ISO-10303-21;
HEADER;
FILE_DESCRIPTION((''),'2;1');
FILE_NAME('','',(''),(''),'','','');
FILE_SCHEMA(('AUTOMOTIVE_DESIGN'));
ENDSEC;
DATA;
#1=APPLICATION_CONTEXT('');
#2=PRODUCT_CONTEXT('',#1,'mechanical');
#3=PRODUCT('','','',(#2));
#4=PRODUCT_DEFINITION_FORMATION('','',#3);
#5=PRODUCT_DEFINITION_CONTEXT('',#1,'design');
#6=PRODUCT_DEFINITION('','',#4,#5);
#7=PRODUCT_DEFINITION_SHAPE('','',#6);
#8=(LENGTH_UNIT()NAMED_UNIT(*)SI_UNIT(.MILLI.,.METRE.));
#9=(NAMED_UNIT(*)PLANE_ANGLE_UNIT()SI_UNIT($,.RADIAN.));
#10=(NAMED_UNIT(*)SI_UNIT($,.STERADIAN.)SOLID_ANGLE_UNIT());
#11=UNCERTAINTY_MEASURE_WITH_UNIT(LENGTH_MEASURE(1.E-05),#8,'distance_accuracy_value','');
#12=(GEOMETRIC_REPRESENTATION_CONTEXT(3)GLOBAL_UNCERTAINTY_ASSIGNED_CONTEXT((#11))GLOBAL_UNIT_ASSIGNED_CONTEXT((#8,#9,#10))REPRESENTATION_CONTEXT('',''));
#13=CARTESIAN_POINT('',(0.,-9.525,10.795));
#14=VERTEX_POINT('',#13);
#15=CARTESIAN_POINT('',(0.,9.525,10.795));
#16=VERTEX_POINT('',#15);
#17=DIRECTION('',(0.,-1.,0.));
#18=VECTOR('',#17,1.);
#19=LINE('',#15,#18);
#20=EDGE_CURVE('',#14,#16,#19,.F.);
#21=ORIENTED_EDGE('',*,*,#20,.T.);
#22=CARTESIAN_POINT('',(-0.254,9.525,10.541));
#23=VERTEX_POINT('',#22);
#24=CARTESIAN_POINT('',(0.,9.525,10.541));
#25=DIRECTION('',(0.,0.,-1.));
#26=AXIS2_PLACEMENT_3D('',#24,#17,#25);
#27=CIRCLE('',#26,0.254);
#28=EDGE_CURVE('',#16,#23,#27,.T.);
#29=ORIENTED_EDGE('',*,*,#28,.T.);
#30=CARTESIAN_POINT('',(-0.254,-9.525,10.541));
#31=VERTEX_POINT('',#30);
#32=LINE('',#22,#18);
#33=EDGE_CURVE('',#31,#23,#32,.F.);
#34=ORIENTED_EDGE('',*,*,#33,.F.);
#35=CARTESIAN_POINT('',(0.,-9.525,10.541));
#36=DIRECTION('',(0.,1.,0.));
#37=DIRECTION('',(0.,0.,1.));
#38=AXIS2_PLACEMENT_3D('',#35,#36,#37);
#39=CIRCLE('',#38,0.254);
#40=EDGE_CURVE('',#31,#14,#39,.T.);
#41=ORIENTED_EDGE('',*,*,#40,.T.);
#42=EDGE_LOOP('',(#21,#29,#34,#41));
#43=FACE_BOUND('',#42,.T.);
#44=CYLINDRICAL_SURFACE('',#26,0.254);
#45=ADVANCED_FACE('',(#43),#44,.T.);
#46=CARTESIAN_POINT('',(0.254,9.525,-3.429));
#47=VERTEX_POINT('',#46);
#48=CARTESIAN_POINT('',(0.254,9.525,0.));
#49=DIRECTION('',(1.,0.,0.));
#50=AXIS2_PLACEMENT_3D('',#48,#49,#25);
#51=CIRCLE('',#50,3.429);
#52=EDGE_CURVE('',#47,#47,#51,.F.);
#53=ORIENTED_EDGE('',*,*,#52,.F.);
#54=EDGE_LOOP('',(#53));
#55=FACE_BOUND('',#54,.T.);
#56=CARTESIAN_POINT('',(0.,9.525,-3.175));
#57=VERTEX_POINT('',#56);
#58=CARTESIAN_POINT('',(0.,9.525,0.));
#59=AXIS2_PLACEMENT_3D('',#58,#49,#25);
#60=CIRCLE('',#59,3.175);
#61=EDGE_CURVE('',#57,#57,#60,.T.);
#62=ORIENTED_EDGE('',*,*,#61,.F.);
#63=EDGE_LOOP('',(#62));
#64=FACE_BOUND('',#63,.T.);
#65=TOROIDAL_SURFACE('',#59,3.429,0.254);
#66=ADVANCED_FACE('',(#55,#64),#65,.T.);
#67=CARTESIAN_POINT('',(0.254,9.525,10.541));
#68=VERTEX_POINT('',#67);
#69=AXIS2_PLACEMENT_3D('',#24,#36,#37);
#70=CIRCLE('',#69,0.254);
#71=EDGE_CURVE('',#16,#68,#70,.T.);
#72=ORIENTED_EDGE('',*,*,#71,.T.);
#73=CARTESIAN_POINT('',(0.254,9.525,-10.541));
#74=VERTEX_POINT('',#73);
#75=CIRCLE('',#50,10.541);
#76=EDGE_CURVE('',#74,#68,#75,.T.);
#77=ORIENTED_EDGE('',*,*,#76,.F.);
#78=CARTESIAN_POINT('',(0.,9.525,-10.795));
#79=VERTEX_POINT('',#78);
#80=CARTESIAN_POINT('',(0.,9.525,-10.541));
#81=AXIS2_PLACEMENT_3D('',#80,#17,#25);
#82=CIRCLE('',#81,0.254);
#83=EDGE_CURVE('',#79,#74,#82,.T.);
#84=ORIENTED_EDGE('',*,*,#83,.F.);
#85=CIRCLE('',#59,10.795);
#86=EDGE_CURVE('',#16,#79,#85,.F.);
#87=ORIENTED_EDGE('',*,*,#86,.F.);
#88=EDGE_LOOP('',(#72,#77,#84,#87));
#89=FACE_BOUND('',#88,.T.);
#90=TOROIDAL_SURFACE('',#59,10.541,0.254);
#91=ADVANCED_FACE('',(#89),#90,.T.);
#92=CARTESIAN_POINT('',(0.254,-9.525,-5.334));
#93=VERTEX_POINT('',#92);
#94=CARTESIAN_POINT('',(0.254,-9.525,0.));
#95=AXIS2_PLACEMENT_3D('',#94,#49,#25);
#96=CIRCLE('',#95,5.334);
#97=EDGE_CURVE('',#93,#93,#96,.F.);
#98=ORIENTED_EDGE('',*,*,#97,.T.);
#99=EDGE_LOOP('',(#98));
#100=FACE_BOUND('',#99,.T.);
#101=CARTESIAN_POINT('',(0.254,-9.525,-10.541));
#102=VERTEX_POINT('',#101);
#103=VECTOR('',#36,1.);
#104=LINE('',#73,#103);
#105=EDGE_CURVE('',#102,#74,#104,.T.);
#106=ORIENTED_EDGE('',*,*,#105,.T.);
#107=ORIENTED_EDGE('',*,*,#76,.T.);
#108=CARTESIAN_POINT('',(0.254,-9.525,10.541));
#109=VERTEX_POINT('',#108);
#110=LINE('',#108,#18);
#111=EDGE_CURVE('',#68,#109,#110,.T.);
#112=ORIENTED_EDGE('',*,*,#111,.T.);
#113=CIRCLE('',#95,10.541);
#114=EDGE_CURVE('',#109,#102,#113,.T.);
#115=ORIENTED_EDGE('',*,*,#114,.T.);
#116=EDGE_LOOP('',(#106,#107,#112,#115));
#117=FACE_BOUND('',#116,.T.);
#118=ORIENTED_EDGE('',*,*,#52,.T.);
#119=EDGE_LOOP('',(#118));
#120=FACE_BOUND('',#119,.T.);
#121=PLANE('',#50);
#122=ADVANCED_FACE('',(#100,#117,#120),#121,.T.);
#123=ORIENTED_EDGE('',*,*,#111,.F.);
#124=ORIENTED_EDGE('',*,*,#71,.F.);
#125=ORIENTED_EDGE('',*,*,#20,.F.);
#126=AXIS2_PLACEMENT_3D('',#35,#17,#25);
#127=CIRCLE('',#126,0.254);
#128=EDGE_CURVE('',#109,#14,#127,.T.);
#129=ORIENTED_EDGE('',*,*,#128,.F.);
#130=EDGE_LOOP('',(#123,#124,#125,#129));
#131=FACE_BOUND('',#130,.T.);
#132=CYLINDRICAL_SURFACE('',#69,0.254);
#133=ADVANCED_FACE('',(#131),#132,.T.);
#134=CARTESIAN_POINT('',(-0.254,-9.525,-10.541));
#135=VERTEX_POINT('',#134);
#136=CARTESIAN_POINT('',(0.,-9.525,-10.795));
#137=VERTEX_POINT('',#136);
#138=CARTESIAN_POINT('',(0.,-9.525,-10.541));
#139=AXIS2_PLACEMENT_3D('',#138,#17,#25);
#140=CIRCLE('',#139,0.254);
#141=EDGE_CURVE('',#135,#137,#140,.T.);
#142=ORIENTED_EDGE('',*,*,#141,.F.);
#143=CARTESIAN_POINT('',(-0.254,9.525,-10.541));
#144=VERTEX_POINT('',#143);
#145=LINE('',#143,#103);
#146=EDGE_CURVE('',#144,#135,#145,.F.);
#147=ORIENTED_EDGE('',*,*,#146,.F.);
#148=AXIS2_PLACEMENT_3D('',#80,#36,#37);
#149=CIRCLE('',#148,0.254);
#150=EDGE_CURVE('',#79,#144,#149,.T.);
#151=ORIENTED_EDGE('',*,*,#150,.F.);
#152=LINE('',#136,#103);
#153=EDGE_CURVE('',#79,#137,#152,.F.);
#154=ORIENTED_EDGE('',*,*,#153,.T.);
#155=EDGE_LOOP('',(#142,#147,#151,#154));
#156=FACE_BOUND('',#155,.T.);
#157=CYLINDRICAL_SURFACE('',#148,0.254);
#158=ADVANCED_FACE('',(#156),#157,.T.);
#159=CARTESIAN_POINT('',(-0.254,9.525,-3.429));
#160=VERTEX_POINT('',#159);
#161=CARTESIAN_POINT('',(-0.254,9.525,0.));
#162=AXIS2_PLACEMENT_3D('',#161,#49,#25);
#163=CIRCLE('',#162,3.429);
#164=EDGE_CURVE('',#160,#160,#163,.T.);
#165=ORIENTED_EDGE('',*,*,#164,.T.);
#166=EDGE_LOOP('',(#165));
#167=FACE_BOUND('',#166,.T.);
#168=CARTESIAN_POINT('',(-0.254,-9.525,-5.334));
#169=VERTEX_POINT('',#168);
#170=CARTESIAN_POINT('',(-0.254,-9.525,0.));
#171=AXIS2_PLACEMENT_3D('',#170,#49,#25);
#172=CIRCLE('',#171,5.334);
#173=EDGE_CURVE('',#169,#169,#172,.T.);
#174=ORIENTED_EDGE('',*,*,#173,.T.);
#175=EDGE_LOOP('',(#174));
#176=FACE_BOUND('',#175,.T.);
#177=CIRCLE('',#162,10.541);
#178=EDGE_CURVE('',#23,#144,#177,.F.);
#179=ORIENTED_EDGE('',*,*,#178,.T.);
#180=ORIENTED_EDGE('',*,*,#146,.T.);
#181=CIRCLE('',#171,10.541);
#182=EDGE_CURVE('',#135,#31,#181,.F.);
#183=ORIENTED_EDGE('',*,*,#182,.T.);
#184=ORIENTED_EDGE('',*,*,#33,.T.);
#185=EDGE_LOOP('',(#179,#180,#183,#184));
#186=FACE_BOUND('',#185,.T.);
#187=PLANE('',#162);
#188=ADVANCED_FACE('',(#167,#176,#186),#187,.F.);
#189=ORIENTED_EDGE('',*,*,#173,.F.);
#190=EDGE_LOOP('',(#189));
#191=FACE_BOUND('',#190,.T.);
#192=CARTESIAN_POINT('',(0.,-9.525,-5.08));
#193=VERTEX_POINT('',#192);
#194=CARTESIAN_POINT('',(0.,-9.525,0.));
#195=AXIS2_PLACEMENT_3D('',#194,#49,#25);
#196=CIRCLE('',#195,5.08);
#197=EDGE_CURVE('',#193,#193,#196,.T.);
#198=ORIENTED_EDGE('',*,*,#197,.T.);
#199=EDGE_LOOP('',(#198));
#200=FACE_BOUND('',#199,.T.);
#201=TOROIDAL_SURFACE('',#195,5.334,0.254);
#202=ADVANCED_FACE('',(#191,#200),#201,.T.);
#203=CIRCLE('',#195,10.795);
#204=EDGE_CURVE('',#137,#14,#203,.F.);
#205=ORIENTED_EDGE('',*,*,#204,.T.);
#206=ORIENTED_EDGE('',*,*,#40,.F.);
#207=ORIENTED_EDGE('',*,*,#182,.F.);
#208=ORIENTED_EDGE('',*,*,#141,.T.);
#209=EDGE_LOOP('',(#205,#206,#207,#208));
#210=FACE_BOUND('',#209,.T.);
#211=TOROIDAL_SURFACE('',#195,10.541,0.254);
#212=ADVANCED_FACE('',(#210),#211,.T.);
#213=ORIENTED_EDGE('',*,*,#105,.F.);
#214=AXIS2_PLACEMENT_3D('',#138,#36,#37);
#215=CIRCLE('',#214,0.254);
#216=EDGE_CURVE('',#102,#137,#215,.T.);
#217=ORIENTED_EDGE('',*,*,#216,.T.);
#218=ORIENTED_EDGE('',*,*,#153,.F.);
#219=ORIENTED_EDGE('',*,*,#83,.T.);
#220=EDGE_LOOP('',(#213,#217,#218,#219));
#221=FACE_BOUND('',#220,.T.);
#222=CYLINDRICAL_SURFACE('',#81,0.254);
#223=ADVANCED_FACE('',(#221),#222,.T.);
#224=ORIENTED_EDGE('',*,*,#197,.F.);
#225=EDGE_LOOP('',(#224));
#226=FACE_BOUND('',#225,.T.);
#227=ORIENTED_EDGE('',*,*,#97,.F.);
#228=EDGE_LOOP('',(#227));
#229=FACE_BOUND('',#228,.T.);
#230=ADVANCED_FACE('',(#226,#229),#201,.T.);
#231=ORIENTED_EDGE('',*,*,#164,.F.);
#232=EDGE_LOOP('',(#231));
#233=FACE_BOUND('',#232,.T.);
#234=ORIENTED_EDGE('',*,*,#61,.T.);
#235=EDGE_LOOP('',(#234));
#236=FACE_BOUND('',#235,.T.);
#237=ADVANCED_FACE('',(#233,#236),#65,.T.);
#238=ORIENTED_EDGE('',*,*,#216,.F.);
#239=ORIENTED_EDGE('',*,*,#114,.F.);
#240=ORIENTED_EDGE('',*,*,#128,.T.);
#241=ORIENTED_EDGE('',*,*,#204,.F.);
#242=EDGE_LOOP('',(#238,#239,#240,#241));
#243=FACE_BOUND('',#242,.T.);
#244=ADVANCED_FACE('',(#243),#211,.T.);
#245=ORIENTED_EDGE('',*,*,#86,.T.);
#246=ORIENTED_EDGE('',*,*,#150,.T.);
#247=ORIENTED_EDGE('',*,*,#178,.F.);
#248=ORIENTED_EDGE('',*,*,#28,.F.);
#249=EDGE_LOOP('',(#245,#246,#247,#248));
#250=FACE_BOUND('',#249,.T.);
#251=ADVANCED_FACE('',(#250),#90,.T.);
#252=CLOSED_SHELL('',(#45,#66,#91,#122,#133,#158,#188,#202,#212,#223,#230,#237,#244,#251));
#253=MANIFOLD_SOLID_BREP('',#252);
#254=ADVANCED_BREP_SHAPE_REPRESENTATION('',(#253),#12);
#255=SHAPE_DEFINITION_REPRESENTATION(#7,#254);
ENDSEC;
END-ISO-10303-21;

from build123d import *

# Parameters (mm, degrees)
SKETCH2_R           = 3.175
SKETCH2_R_2         = 5.08
BOSS_EXTRUDE1_DEPTH = 0.254
FILLET1_R           = 0.254
FILLET2_R           = 0.254


with BuildPart() as part:
    # Sketch2 → Boss-Extrude1 (new, symmetric)
    with BuildSketch(Plane(origin=(0, 0, 0), x_dir=(0, 0, -1), z_dir=(1, 0, 0))):
        with BuildLine():
            Line((10.795, 9.525), (10.795, -9.525))
            ThreePointArc((10.795, -9.525), (0, -20.32), (-10.795, -9.525))
            Line((-10.795, -9.525), (-10.795, 9.525))
            ThreePointArc((-10.795, 9.525), (0, 20.32), (10.795, 9.525))
        make_face()
        with Locations((0, 9.525)):
            Circle(SKETCH2_R, mode=Mode.SUBTRACT)
        with Locations((0, -9.525)):
            Circle(SKETCH2_R_2, mode=Mode.SUBTRACT)
    extrude(amount=BOSS_EXTRUDE1_DEPTH, both=True)

    # Fillet1
    fillet1_edges = [part.edges().sort_by_distance(p)[0] for p in [
        (0.254, -20.32, 0),
        (0.254, 9.525, 3.175),
        (0.254, 0, -10.795),
        (0.254, -9.525, 5.08),
        (0.254, 20.32, 0),
        (0.254, 0, 10.795),
    ]]
    fillet(fillet1_edges, radius=FILLET1_R)

    # Fillet2
    fillet2_edges = [part.edges().sort_by_distance(p)[0] for p in [
        (-0.254, -9.525, 5.08),
        (-0.254, 9.525, 3.175),
        (-0.254, 0, 10.795),
        (-0.254, -20.32, 0),
        (-0.254, 0, -10.795),
        (-0.254, 20.32, 0),
    ]]
    fillet(fillet2_edges, radius=FILLET2_R - 0.0001)  # a hair under: the kernel refuses the full size


solid = part.part
